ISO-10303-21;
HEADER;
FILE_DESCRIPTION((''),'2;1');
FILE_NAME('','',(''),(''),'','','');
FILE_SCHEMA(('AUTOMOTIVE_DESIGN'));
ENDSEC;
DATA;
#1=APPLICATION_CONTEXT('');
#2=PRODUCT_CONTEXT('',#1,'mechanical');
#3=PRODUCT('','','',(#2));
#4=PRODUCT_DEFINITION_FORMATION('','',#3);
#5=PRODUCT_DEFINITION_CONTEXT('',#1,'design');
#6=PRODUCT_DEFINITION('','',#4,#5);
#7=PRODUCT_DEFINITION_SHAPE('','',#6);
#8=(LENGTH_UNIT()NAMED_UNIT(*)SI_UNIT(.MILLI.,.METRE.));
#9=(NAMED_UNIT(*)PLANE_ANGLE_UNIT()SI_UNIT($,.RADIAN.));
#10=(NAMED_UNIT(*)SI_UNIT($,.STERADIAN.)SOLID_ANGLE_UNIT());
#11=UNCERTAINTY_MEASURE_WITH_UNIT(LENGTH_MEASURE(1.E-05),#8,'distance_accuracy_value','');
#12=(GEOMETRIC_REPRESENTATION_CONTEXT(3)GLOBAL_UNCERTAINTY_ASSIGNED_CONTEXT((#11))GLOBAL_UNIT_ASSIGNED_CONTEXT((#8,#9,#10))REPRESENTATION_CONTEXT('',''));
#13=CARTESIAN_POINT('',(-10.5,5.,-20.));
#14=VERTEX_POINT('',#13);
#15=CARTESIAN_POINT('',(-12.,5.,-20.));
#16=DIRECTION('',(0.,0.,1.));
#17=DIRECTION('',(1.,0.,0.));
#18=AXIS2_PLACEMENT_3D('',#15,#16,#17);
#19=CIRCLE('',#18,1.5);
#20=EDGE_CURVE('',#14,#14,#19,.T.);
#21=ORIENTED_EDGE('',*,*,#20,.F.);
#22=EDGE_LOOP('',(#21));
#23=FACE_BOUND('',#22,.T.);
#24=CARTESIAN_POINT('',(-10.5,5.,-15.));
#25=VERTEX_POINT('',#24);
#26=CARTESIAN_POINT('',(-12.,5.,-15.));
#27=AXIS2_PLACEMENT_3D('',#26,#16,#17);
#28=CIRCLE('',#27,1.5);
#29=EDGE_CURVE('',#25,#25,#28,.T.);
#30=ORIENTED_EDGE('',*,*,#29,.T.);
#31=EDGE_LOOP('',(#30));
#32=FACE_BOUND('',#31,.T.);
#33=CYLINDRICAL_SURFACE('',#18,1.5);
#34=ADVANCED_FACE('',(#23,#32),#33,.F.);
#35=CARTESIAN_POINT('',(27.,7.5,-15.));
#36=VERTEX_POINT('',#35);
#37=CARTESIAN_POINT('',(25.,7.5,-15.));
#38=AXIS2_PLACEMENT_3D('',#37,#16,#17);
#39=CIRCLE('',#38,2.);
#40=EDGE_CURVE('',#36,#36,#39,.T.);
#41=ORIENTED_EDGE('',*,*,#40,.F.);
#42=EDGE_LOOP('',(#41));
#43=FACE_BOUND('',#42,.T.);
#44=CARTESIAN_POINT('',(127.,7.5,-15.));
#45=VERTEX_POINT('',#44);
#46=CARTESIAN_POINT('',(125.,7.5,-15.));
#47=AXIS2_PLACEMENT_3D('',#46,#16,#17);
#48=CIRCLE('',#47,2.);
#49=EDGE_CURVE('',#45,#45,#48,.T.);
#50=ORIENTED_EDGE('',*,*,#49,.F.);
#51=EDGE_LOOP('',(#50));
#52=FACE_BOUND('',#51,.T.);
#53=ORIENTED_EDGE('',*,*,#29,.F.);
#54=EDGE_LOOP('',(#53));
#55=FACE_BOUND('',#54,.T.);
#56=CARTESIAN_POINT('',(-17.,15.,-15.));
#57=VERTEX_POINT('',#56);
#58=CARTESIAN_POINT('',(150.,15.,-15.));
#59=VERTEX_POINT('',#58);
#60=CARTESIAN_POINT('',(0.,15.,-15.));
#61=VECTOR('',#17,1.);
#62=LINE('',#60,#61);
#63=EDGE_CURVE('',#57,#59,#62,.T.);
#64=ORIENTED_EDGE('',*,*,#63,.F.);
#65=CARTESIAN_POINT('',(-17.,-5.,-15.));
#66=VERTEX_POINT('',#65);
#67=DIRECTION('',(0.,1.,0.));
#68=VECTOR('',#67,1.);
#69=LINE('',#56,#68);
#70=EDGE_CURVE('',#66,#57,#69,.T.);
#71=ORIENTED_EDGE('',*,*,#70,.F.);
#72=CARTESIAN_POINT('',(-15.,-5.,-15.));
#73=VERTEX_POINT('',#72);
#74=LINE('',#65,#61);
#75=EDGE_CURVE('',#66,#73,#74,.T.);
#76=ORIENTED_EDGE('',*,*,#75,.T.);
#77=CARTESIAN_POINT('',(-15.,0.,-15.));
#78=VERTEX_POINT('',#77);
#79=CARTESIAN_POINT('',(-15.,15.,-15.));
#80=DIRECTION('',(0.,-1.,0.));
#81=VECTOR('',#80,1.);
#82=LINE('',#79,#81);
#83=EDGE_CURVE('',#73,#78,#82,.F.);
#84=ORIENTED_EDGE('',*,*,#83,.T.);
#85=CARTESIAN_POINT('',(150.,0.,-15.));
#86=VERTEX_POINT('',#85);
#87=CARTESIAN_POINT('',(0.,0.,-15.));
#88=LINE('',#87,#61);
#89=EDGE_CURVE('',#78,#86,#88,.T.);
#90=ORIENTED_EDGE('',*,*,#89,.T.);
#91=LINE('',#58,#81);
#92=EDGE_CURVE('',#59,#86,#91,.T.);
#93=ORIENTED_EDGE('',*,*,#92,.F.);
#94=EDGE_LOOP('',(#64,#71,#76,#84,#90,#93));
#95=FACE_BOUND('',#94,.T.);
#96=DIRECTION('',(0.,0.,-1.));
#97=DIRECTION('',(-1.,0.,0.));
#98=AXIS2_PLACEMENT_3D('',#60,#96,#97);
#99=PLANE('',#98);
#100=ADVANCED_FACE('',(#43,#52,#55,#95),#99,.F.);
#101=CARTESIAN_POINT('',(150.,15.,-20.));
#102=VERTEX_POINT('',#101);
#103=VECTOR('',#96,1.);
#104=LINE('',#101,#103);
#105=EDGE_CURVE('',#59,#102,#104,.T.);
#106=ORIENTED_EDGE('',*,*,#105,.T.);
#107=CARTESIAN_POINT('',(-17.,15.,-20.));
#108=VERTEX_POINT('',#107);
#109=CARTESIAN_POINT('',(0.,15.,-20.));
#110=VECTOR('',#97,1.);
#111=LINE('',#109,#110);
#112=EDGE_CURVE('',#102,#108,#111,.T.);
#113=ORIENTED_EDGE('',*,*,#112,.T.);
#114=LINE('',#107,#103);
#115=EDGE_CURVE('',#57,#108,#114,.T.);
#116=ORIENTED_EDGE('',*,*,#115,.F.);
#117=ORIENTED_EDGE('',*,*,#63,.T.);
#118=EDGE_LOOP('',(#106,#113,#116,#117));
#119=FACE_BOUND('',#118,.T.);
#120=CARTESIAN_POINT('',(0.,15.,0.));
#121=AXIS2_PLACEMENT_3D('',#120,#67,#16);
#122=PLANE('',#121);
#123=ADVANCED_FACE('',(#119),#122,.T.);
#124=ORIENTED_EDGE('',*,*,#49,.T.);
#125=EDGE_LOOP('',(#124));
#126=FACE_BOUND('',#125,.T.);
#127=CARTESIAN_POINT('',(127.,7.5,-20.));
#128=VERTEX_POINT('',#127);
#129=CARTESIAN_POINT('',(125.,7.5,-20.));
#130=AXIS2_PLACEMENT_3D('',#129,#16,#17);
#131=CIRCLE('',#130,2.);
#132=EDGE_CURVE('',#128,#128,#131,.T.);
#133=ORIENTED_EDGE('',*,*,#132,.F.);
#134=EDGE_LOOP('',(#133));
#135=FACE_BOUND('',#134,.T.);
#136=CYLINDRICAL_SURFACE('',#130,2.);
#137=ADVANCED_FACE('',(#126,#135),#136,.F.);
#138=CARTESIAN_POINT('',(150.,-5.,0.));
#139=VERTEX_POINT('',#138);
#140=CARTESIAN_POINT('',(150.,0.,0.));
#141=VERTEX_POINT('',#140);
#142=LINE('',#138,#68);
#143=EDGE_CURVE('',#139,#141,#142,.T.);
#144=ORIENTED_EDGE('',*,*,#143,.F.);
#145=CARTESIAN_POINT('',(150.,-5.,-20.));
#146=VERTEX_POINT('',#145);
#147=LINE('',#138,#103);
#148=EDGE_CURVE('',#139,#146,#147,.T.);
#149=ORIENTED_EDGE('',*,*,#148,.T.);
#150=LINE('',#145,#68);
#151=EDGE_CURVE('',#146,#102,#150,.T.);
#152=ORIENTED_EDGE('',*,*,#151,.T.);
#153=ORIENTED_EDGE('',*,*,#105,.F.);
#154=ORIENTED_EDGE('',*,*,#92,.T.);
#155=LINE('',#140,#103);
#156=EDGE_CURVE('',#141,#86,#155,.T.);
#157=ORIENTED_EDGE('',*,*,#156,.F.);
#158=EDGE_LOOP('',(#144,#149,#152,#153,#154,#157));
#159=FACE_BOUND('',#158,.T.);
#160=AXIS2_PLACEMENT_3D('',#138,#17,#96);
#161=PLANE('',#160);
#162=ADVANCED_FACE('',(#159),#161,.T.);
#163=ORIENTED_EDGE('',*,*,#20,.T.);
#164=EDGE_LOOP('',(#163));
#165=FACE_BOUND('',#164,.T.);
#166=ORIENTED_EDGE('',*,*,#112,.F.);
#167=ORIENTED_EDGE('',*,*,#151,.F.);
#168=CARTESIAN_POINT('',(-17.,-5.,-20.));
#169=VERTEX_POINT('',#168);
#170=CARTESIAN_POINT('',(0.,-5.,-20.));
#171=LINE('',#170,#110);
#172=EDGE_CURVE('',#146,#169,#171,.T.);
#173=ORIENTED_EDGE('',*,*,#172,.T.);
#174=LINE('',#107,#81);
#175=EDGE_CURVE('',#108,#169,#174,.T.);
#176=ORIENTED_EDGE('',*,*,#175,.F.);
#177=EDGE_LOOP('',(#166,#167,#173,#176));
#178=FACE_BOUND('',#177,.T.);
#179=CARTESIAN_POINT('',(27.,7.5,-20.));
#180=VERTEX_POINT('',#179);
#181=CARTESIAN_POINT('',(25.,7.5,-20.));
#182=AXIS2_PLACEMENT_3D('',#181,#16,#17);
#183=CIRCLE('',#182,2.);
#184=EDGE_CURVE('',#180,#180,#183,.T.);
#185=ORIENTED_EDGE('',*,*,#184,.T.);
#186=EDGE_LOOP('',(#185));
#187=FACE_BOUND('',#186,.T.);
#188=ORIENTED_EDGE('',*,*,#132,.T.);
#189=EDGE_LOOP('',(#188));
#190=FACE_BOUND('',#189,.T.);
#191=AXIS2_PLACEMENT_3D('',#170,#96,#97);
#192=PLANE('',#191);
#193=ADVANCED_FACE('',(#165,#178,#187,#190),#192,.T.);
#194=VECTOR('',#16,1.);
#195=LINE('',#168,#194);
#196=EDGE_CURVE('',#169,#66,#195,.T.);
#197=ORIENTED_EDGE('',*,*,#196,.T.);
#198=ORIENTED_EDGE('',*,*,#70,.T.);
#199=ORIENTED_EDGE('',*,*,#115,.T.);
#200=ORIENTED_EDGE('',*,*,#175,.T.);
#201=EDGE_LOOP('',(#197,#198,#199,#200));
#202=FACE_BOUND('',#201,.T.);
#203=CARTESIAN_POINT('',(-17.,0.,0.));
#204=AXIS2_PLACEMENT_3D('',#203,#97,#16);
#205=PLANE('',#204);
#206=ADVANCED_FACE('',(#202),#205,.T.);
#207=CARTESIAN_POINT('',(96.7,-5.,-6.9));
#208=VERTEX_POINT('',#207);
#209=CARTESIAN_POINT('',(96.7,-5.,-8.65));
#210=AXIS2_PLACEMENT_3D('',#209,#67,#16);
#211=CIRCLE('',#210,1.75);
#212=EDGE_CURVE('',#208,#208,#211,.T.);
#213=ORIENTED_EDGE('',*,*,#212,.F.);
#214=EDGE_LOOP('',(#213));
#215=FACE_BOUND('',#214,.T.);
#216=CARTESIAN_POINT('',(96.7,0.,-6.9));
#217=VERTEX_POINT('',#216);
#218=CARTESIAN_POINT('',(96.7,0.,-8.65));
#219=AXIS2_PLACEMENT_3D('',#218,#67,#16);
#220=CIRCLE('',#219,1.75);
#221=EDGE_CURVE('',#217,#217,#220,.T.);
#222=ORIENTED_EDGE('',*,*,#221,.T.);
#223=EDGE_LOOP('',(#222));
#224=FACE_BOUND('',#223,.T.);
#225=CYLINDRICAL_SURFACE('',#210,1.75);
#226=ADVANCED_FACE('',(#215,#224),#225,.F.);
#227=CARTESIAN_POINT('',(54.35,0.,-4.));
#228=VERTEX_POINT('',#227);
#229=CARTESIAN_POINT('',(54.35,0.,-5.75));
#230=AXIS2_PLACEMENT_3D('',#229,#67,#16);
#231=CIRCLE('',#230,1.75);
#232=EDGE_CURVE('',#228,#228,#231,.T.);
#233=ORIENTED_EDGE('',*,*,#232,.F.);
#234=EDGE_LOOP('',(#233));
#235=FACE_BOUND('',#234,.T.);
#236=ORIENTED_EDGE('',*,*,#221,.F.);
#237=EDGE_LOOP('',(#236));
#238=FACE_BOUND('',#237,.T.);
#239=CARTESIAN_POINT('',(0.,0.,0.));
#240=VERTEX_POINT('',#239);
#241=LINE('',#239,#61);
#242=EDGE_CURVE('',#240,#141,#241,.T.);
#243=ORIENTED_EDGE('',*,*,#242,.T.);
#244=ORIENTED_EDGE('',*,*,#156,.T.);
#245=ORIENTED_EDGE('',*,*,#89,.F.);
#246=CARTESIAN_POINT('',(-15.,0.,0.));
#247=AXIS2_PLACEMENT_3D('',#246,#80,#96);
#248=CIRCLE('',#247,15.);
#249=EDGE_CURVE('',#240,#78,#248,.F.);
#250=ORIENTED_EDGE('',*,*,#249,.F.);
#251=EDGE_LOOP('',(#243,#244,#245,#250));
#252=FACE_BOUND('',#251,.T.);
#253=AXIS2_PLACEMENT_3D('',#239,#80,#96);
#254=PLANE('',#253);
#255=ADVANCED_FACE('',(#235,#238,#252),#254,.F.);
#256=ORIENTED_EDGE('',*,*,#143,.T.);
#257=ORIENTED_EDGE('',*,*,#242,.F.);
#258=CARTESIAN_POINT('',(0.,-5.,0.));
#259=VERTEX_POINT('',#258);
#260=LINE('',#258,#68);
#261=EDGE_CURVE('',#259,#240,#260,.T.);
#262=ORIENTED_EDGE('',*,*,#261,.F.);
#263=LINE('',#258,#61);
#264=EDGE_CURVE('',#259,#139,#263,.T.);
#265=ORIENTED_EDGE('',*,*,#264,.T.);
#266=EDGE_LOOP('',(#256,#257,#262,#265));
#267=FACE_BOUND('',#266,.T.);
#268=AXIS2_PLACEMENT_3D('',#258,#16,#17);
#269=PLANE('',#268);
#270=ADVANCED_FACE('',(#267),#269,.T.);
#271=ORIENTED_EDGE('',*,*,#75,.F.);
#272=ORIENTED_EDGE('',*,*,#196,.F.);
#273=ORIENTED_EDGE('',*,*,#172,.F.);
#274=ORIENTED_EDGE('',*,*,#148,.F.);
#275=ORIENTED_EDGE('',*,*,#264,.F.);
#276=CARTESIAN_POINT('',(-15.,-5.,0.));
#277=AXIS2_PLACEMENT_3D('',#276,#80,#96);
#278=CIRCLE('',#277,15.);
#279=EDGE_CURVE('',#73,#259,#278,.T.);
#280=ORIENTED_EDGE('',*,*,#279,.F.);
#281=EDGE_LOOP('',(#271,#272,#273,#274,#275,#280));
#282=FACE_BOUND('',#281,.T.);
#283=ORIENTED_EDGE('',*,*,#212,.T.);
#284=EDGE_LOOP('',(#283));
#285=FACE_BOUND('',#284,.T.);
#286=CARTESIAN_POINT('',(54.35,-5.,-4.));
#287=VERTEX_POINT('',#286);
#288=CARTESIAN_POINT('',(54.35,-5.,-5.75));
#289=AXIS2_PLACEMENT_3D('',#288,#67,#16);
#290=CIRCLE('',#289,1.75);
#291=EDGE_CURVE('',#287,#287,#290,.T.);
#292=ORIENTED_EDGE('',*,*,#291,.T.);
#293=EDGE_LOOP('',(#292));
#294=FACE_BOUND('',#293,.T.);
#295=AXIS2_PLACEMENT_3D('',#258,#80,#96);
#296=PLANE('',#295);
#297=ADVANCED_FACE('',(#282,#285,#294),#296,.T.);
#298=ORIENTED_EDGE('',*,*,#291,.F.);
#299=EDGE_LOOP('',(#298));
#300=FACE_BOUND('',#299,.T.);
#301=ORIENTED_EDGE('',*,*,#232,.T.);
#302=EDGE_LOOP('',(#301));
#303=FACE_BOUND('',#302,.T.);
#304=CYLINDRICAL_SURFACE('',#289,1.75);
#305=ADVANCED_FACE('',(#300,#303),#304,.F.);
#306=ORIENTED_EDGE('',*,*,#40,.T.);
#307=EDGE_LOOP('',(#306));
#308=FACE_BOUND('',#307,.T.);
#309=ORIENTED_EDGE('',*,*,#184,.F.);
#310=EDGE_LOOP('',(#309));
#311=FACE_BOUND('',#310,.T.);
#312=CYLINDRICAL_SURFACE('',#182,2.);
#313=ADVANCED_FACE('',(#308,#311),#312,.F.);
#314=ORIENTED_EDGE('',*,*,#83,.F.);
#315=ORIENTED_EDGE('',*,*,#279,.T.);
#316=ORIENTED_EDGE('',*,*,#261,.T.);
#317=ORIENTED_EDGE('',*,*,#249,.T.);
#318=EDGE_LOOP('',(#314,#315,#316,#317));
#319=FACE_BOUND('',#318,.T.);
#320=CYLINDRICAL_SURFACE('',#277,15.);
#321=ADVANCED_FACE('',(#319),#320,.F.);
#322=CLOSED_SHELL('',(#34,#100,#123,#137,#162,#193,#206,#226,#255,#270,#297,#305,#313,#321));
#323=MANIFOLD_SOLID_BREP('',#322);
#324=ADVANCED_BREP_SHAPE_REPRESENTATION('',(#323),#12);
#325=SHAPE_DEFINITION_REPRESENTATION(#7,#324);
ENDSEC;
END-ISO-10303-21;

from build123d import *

# Parameters (mm, degrees)
SKETCH1_W           = 150
SKETCH1_H           = 20
BOSS_EXTRUDE1_DEPTH = 5
SKETCH3_W           = 150
SKETCH3_H           = 5
BOSS_EXTRUDE2_DEPTH = 15
SKETCH5_R           = 2
CUT_EXTRUDE1_DEPTH  = 152.492574075
SKETCH6_R           = 1.75
CUT_EXTRUDE2_DEPTH  = 153.069063257
SKETCH7_W           = 5
SKETCH7_H           = 20
BOSS_EXTRUDE3_DEPTH = 17
SKETCH8_R           = 1.5
CUT_EXTRUDE3_DEPTH  = 152.492574075
FILLET2_R           = 15


with BuildPart() as part:
    # Sketch1 → Boss-Extrude1 (new body)
    with BuildSketch(Plane(origin=(0, 0, 0), x_dir=(1, 0, 0), z_dir=(0, 1, 0))):
        with Locations((75, 10)):
            Rectangle(SKETCH1_W, SKETCH1_H)
    extrude(amount=-BOSS_EXTRUDE1_DEPTH)

    # Sketch3 → Boss-Extrude2 (add)
    with BuildSketch(Plane(origin=(0, 0, 0), x_dir=(1, 0, 0), z_dir=(0, 1, 0))):
        with Locations((75, 17.5)):
            Rectangle(SKETCH3_W, SKETCH3_H)
    extrude(amount=BOSS_EXTRUDE2_DEPTH)

    # Sketch5 → Cut-Extrude1 (cut, through all)
    with BuildSketch(Plane.XY.offset(-15)):
        with Locations((25, 7.5)):
            Circle(SKETCH5_R)
        with Locations((125, 7.5)):
            Circle(SKETCH5_R)
    extrude(amount=-CUT_EXTRUDE1_DEPTH, mode=Mode.SUBTRACT)

    # Sketch6 → Cut-Extrude2 (cut, through all)
    with BuildSketch(Plane(origin=(0, 0, 0), x_dir=(1, 0, 0), z_dir=(0, 1, 0))):
        with Locations(Location((54.35, 5.75, 0), (0, 0, 270))):
            Circle(SKETCH6_R)
        with Locations(Location((96.7, 8.65, 0), (0, 0, 270))):
            Circle(SKETCH6_R)
    extrude(amount=-CUT_EXTRUDE2_DEPTH, mode=Mode.SUBTRACT)

    # Sketch7 → Boss-Extrude3 (add)
    with BuildSketch(Plane.ZY):
        with Locations((-17.5, 5)):
            Rectangle(SKETCH7_W, SKETCH7_H)
    extrude(amount=BOSS_EXTRUDE3_DEPTH)

    # Sketch8 → Cut-Extrude3 (cut, through all)
    with BuildSketch(Plane.XY.offset(-15)):
        with Locations((-12, 5)):
            Circle(SKETCH8_R)
    extrude(amount=-CUT_EXTRUDE3_DEPTH, mode=Mode.SUBTRACT)

    # Fillet2
    fillet2_edges = [part.edges().sort_by_distance(p)[0] for p in [
        (0, -2.5, -15),
    ]]
    fillet(fillet2_edges, radius=FILLET2_R - 0.0001)  # a hair under: the kernel refuses the full size


solid = part.part
